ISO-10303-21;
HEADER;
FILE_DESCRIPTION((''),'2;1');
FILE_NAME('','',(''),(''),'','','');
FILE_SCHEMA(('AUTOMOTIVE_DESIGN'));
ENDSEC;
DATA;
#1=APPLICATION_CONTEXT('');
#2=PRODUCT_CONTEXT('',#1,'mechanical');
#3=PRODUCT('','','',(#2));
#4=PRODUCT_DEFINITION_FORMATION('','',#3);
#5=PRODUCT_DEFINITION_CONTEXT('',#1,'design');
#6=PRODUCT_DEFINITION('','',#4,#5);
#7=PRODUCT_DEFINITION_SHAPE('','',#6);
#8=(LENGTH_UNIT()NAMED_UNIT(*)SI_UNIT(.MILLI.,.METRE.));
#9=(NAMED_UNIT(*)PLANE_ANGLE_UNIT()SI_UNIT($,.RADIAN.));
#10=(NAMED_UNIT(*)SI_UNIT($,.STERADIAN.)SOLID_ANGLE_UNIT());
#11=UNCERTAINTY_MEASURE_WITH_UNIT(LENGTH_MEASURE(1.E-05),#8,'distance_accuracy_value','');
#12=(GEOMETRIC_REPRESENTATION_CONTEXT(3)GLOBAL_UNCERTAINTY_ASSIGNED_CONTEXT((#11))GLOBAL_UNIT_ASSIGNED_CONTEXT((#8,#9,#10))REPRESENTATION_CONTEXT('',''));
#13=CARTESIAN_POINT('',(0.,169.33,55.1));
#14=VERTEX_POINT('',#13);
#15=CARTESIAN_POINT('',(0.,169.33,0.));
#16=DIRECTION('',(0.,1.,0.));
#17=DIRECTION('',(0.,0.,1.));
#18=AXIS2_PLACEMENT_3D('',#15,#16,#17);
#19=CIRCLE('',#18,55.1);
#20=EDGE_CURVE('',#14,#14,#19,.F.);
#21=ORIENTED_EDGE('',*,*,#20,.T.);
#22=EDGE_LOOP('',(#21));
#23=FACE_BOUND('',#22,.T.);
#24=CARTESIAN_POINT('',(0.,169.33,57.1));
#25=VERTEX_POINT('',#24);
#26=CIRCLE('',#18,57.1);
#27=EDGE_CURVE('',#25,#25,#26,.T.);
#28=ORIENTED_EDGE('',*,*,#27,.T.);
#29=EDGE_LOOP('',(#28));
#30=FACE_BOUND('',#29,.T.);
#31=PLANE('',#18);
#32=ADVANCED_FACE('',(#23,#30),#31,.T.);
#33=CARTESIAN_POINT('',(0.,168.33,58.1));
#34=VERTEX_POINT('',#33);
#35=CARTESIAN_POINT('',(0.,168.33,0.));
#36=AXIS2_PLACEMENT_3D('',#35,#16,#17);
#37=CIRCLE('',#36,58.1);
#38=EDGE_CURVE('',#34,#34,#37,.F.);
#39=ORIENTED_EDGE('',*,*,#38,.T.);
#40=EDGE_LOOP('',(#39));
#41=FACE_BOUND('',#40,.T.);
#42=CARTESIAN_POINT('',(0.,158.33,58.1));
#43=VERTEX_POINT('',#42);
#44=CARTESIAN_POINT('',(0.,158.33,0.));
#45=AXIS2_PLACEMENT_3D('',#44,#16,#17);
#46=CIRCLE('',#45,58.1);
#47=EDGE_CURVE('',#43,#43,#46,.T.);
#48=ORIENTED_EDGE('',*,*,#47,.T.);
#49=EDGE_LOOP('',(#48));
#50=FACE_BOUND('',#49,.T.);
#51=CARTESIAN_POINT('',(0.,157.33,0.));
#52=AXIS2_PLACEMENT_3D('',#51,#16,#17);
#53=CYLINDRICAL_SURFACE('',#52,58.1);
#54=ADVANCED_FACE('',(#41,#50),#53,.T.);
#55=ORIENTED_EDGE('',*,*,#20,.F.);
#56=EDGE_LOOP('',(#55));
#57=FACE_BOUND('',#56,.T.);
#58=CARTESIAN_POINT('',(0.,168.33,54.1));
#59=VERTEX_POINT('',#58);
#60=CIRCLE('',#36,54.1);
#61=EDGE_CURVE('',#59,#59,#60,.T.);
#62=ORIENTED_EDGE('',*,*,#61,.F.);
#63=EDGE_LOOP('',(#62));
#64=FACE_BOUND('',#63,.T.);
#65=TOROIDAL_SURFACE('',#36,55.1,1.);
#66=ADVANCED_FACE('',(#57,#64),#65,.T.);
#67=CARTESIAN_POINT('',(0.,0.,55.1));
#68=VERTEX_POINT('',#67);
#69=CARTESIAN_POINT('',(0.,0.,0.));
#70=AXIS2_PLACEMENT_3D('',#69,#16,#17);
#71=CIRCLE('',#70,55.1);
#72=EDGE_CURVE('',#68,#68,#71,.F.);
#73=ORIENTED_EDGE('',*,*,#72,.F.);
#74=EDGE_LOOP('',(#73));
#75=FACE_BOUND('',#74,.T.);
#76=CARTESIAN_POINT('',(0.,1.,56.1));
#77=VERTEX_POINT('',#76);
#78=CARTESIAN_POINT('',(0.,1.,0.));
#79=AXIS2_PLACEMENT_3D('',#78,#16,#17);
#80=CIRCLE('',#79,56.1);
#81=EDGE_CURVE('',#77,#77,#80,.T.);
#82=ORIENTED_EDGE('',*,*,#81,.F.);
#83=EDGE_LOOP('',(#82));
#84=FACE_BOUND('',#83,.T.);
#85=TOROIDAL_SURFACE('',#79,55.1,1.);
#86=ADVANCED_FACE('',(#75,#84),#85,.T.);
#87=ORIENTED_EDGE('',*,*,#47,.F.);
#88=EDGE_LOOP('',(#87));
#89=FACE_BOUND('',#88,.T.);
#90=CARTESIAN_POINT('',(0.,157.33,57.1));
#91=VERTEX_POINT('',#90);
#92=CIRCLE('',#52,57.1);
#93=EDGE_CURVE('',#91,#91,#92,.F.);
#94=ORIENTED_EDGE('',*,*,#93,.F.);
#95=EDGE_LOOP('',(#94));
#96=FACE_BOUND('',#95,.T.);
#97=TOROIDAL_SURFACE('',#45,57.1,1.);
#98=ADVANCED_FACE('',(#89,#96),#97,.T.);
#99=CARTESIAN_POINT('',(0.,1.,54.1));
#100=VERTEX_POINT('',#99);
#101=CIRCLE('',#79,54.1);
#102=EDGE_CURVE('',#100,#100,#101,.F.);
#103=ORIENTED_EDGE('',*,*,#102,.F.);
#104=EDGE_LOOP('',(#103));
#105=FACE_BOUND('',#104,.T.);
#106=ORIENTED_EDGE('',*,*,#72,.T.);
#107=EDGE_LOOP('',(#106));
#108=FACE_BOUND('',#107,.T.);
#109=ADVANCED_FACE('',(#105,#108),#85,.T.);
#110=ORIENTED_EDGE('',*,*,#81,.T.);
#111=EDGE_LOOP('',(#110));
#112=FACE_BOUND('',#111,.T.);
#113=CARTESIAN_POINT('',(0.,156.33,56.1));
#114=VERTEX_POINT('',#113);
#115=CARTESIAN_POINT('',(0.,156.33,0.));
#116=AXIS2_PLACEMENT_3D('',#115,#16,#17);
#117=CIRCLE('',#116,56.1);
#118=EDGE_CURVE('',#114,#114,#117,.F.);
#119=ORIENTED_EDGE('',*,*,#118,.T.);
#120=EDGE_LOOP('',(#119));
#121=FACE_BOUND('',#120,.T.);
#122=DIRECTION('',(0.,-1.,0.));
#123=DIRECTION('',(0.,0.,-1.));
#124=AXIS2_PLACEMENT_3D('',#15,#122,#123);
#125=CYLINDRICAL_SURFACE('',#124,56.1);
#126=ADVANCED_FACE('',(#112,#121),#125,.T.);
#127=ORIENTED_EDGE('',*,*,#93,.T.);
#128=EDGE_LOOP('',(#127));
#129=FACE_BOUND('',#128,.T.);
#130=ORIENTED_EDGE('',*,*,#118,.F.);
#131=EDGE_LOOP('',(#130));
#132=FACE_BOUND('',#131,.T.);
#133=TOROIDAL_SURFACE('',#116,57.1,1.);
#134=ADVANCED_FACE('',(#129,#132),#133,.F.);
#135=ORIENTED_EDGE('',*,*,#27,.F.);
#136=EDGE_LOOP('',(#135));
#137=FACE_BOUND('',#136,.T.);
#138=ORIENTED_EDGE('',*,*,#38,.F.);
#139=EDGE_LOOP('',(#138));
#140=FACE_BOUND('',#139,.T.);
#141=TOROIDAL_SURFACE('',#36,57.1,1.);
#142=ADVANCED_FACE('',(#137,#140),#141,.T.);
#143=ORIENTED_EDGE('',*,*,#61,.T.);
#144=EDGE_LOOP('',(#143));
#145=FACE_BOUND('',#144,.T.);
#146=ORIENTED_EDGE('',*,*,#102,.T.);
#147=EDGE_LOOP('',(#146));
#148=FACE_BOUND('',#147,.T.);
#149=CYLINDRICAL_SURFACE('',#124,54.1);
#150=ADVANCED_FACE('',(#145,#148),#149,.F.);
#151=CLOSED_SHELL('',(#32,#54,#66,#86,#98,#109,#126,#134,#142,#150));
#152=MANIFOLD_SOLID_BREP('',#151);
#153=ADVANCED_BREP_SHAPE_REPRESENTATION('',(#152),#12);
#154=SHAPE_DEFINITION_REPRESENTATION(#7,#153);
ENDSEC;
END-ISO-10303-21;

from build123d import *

# Parameters (mm, degrees)
SKETCH1_R           = 56.1
SKETCH1_R_2         = 54.1
BOSS_EXTRUDE1_DEPTH = 169.33
BOSS_EXTRUDE2_START = -12
SKETCH3_R           = 58.1
SKETCH3_R_2         = 56.1
BOSS_EXTRUDE2_DEPTH = 12
FILLET1_R           = 1


with BuildPart() as part:
    # Sketch1 → Boss-Extrude1 (new body)
    with BuildSketch(Plane(origin=(0, 0, 0), x_dir=(1, 0, 0), z_dir=(0, 1, 0))):
        with Locations(Location((0, 0, 0), (0, 0, 270))):
            Circle(SKETCH1_R)
        with Locations(Location((0, 0, 0), (0, 0, 270))):
            Circle(SKETCH1_R_2, mode=Mode.SUBTRACT)
    extrude(amount=BOSS_EXTRUDE1_DEPTH)

    # Sketch3 → Boss-Extrude2 (add)
    with BuildSketch(Plane(origin=(0, 169.33, 0), x_dir=(1, 0, 0), z_dir=(0, 1, 0)).offset(BOSS_EXTRUDE2_START)):
        with Locations(Location((0, 0, 0), (0, 0, 270))):
            Circle(SKETCH3_R)
        with Locations(Location((0, 0, 0), (0, 0, 270))):
            Circle(SKETCH3_R_2, mode=Mode.SUBTRACT)
    extrude(amount=BOSS_EXTRUDE2_DEPTH)

    # Fillet1
    fillet1_edges = [part.edges().sort_by_distance(p)[0] for p in [
        (0, 157.33, -56.1),
        (0, 157.33, -58.1),
        (0, 169.33, -58.1),
        (0, 0, -56.1),
        (0, 0, -54.1),
        (0, 169.33, -54.1),
    ]]
    fillet(fillet1_edges, radius=FILLET1_R - 0.0001)  # a hair under: the kernel refuses the full size


solid = part.part
